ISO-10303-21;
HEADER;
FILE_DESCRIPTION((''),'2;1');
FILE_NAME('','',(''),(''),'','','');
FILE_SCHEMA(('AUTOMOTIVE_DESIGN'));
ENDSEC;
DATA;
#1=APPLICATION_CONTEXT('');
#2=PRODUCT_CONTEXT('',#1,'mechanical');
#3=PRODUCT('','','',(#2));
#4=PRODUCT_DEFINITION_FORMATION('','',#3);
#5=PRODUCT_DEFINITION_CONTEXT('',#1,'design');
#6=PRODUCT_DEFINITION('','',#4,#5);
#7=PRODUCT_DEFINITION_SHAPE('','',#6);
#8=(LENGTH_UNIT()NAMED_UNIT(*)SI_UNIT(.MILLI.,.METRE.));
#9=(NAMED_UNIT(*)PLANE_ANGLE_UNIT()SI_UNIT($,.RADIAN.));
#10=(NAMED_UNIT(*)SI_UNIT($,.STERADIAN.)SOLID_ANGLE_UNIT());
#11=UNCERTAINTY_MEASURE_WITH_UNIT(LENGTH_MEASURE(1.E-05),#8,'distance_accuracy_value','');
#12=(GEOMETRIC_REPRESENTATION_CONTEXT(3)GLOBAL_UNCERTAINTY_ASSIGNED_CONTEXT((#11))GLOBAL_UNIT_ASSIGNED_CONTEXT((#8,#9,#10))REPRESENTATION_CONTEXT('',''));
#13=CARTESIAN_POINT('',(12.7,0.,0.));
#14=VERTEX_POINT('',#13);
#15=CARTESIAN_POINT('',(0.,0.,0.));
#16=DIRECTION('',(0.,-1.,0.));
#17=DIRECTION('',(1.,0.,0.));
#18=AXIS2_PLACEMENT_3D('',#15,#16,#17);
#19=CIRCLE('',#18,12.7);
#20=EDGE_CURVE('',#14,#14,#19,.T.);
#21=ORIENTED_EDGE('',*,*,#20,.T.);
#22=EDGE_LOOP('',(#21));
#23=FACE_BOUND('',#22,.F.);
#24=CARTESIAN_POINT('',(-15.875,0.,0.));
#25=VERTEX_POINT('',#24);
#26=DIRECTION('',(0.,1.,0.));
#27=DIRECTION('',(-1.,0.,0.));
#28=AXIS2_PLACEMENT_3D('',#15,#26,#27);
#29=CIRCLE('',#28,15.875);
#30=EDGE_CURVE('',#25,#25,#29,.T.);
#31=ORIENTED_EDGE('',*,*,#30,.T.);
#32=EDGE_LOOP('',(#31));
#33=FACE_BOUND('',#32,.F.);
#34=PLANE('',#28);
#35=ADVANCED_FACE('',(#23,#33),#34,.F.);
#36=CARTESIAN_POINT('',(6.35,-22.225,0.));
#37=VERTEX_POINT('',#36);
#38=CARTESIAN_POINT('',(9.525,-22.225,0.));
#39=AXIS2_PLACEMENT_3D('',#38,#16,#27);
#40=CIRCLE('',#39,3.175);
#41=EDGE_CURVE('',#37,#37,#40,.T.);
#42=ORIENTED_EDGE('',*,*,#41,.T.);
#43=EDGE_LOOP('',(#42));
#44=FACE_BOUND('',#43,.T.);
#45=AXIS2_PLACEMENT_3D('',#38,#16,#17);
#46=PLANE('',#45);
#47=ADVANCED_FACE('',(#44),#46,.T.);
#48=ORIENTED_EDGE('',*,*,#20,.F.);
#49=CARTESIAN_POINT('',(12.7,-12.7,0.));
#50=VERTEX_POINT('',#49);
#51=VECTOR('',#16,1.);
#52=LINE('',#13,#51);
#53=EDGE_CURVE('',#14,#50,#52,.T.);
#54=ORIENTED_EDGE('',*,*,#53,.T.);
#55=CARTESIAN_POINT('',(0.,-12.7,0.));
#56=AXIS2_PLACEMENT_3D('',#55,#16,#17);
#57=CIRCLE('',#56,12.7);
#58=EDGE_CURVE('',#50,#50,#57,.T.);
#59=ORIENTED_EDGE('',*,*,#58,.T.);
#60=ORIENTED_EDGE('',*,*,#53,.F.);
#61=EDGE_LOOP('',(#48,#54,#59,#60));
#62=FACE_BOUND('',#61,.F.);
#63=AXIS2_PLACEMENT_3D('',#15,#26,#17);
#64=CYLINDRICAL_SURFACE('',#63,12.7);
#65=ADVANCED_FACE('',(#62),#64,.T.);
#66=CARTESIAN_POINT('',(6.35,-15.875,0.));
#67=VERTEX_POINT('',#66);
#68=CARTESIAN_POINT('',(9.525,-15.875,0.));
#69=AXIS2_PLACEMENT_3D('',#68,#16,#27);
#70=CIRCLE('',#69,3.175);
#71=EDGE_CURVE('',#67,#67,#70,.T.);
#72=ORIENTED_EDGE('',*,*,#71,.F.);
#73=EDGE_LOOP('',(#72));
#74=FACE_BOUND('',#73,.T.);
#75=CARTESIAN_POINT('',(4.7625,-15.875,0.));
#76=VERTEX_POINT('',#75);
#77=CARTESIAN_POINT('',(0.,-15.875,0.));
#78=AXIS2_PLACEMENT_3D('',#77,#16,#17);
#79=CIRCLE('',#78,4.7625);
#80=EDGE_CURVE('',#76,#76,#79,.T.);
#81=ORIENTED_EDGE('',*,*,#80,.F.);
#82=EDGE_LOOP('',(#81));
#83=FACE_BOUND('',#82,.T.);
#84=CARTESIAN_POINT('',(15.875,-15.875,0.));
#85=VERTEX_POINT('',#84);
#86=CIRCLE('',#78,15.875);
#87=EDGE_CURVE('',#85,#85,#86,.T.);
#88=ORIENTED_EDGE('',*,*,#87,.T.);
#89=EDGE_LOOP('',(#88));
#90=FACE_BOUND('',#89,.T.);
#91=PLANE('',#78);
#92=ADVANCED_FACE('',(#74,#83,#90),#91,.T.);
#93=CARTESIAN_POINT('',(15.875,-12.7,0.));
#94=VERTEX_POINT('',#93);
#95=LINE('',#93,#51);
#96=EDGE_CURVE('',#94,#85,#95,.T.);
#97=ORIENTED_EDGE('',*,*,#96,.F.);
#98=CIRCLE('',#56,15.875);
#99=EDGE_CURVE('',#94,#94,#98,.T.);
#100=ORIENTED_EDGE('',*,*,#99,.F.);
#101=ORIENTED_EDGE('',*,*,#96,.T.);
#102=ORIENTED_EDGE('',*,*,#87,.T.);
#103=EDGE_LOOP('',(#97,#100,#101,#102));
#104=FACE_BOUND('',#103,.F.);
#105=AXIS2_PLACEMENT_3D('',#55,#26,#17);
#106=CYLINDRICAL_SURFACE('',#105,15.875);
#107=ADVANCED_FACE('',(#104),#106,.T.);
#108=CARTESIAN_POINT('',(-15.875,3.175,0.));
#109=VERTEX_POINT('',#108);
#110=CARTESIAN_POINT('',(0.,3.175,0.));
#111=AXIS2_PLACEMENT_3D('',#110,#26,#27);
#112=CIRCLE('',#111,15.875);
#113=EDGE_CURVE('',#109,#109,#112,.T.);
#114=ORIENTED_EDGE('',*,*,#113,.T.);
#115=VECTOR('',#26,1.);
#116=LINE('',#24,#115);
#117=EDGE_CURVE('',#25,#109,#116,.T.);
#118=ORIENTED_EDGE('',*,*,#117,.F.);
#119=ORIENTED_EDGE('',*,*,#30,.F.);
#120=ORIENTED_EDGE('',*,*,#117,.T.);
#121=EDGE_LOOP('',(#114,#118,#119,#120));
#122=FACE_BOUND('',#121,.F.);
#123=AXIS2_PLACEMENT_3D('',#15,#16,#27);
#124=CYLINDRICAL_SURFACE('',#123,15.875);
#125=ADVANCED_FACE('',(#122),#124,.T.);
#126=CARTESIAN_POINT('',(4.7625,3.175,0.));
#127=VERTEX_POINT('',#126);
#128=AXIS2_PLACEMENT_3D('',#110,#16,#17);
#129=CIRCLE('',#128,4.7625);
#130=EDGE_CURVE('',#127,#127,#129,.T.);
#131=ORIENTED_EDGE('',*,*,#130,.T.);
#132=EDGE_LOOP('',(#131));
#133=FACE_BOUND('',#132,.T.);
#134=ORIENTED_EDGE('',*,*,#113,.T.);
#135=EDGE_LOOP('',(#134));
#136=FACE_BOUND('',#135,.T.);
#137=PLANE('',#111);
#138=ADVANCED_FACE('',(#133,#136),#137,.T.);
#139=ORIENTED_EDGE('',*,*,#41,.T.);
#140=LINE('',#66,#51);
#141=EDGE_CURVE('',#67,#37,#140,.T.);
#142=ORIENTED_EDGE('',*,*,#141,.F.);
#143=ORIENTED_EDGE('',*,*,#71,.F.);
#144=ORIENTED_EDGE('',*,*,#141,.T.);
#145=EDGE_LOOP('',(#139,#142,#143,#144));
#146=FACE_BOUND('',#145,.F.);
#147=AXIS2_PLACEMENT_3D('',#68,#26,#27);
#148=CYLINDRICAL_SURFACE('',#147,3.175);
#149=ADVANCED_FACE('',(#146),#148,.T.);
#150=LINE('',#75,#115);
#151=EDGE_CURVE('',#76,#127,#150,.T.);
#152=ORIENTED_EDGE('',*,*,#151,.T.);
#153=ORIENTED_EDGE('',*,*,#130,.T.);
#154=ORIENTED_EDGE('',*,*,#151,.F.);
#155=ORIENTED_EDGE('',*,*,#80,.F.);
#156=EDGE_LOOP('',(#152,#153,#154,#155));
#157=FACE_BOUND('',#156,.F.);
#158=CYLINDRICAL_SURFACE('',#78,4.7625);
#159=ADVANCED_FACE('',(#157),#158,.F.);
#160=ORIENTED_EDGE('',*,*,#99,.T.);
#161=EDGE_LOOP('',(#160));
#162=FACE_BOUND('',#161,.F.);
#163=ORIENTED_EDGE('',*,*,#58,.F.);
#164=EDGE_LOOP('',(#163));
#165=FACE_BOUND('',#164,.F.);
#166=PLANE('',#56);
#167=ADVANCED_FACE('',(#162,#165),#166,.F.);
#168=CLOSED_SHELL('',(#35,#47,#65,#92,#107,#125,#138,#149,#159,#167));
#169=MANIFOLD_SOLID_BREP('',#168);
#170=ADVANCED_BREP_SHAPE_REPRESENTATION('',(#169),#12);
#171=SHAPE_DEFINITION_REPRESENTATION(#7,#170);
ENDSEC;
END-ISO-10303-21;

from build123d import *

# Parameters (mm, degrees)
F0_R     = 12.7
F1_DEPTH = 12.7
F2_R     = 15.875
F2_R_2   = 12.7
F3_DEPTH = 3.175
F4_R     = 15.875
F4_R_2   = 12.7
F5_DEPTH = 3.175
F7_DEPTH = 6.35
F8_R     = 4.7625
F9_DEPTH = 50.8


with BuildPart() as f1:
    # F0 (on Front) → F1 (new body)
    with BuildSketch(Plane.XZ):
        Circle(F0_R)
    extrude(amount=F1_DEPTH)

    # F2 (on face) → F3 (join)
    with BuildSketch(Plane.XZ.offset(12.7)):
        Circle(F2_R)
        Circle(F2_R_2, mode=Mode.SUBTRACT)
        Circle(F2_R_2)
    extrude(amount=F3_DEPTH)

    # F4 (on face) → F5 (join)
    with BuildSketch(Plane(origin=(0, 0, 0), x_dir=(-1, 0, 0), z_dir=(0, 1, 0))):
        Circle(F4_R)
        Circle(F4_R_2, mode=Mode.SUBTRACT)
        Circle(F4_R_2)
    extrude(amount=F5_DEPTH)

    # F6 (on face) → F7 (join)
    with BuildSketch(Plane.XZ.offset(15.875)):
        with BuildLine():
            ThreePointArc((12.7, 0), (9.525, 3.175), (6.35, 0))
            ThreePointArc((6.35, 0), (9.525, -3.175), (12.7, 0))
        make_face()
    extrude(amount=F7_DEPTH)

    # F8 (on face) → F9 (cut)
    with BuildSketch(Plane.XZ.offset(15.875)):
        Circle(F8_R)
    extrude(amount=-F9_DEPTH, mode=Mode.SUBTRACT)


solid = f1.part
